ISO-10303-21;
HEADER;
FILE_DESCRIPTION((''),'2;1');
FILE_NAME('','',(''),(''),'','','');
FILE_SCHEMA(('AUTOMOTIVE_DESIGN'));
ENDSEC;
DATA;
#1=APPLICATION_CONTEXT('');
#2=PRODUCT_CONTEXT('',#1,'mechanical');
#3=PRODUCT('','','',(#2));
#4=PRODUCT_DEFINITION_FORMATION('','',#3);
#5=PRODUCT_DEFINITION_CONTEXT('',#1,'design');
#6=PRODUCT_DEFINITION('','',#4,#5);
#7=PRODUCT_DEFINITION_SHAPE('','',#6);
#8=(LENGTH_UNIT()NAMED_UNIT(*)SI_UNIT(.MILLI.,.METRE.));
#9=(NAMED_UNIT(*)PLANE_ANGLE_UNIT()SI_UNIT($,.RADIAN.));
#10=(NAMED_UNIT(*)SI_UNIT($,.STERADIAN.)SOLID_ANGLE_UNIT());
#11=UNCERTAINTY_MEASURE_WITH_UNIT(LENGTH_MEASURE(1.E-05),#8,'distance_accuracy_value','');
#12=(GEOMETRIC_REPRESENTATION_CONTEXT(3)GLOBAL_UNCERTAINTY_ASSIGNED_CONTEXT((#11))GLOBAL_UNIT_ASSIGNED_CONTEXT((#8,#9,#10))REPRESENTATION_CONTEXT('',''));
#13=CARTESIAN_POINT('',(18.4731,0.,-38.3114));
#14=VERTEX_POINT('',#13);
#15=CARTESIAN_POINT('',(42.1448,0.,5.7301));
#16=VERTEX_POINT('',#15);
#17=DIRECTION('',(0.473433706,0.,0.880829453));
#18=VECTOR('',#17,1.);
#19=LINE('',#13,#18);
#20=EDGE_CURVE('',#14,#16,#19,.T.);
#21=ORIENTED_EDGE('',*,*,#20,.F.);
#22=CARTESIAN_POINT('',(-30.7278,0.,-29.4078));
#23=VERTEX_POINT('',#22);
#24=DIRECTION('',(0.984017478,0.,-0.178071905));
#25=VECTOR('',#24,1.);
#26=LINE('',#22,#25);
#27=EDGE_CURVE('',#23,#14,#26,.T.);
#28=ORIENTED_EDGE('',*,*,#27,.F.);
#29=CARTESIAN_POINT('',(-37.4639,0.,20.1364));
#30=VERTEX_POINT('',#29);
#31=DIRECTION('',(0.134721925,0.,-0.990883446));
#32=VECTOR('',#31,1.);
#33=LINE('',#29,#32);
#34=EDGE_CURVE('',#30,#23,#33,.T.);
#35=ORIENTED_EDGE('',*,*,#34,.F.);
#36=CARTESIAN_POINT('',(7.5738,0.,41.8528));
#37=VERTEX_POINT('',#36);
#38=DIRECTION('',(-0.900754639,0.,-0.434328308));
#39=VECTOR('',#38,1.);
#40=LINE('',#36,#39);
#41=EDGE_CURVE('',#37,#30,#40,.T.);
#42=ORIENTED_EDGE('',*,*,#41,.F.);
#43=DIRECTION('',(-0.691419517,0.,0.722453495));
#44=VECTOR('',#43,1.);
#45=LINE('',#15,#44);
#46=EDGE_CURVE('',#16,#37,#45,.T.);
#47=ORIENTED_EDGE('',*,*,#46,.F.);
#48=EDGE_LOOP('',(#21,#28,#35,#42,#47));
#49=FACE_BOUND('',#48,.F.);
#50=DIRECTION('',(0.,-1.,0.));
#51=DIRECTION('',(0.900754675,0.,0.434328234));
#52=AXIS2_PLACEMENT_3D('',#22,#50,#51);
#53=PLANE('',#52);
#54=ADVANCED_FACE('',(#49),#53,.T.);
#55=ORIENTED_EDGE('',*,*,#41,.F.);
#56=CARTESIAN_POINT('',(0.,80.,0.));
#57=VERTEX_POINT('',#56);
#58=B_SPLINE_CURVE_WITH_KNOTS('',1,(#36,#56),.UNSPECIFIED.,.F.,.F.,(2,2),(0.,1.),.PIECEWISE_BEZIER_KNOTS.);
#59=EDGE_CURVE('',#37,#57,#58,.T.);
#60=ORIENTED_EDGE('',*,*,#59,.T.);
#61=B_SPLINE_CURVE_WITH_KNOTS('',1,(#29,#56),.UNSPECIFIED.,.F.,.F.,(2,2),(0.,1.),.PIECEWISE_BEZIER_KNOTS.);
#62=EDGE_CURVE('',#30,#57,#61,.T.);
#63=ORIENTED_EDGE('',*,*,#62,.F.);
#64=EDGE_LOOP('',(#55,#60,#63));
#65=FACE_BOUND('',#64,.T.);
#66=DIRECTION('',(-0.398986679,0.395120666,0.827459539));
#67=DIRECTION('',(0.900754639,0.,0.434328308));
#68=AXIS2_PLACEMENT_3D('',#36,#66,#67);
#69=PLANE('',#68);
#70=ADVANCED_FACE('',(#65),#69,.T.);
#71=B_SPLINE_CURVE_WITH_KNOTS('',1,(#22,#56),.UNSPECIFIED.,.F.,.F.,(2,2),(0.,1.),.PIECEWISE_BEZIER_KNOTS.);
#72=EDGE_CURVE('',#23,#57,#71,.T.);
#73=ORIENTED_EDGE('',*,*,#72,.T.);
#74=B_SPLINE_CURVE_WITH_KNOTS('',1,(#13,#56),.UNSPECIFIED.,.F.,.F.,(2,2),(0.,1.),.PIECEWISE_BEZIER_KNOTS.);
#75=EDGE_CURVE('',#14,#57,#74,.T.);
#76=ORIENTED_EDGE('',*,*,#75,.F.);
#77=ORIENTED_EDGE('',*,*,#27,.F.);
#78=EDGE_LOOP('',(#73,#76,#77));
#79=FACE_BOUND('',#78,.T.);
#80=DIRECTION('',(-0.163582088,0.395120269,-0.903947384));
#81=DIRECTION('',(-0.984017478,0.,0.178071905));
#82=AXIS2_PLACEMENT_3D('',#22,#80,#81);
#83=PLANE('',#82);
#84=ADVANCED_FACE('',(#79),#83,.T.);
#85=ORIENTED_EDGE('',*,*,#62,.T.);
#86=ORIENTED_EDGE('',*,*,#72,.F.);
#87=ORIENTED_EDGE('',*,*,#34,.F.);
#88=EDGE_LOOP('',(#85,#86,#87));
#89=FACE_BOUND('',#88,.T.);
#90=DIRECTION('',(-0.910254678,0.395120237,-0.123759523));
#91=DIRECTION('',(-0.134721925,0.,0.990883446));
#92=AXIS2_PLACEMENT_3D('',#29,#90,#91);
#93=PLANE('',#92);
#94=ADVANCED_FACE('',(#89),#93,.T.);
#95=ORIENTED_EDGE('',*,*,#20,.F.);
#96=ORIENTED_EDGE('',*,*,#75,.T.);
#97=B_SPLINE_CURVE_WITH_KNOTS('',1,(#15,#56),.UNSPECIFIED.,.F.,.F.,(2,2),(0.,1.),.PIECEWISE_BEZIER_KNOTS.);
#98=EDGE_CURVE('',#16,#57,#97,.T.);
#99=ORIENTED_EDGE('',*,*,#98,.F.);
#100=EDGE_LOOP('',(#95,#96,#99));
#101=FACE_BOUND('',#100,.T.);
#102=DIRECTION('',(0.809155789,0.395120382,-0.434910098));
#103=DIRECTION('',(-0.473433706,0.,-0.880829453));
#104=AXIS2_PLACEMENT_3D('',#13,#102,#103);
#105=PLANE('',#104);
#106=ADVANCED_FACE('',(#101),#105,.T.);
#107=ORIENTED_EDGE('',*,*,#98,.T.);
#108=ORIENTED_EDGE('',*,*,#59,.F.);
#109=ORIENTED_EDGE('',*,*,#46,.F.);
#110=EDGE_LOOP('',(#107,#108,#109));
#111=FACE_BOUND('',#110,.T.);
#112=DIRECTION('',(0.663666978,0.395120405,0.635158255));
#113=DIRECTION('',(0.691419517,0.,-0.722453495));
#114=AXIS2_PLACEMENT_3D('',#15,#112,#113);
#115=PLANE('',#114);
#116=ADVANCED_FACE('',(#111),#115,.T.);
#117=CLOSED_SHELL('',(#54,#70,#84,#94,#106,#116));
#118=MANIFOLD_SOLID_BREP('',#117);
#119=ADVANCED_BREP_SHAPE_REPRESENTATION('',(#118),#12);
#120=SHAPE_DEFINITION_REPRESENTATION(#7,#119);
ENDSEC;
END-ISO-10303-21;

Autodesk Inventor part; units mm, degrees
ref_plane "YZ Plane" through (0, 0, 0) normal (1, 0, 0) x (0, 1, 0)
ref_plane "XY Plane" through (0, 0, 0) normal (0, 0, 1) x (1, 0, 0)
sketch "Sketch1" plane through (0, 0, 0) normal (0, 1, 0) x (-1, 0, 0)
  line L0 (30.7278, -29.4078) -> (-18.4731, -38.3114)
  line L1 (-18.4731, -38.3114) -> (-42.1448, 5.7301)
  line L2 (-42.1448, 5.7301) -> (-7.5738, 41.8528)
  line L3 (-7.5738, 41.8528) -> (37.4639, 20.1364)
  line L4 (37.4639, 20.1364) -> (30.7278, -29.4078)
  point P0 (0, 0)
  point P1 (0, 0)
ref_plane "Work Plane1" through (0, 80, 0) normal (0, 1, 0) x (-1, 0, 0)
sketch "Sketch2" plane through (0, 80, 0) normal (0, 1, 0) x (-1, 0, 0)
  point P0 (0, 0)
  point P1 (0, 0)
loft "Loft1" add profiles "Sketch1" section 2 point at (0, 80, 0)
properties part number "largePart"
